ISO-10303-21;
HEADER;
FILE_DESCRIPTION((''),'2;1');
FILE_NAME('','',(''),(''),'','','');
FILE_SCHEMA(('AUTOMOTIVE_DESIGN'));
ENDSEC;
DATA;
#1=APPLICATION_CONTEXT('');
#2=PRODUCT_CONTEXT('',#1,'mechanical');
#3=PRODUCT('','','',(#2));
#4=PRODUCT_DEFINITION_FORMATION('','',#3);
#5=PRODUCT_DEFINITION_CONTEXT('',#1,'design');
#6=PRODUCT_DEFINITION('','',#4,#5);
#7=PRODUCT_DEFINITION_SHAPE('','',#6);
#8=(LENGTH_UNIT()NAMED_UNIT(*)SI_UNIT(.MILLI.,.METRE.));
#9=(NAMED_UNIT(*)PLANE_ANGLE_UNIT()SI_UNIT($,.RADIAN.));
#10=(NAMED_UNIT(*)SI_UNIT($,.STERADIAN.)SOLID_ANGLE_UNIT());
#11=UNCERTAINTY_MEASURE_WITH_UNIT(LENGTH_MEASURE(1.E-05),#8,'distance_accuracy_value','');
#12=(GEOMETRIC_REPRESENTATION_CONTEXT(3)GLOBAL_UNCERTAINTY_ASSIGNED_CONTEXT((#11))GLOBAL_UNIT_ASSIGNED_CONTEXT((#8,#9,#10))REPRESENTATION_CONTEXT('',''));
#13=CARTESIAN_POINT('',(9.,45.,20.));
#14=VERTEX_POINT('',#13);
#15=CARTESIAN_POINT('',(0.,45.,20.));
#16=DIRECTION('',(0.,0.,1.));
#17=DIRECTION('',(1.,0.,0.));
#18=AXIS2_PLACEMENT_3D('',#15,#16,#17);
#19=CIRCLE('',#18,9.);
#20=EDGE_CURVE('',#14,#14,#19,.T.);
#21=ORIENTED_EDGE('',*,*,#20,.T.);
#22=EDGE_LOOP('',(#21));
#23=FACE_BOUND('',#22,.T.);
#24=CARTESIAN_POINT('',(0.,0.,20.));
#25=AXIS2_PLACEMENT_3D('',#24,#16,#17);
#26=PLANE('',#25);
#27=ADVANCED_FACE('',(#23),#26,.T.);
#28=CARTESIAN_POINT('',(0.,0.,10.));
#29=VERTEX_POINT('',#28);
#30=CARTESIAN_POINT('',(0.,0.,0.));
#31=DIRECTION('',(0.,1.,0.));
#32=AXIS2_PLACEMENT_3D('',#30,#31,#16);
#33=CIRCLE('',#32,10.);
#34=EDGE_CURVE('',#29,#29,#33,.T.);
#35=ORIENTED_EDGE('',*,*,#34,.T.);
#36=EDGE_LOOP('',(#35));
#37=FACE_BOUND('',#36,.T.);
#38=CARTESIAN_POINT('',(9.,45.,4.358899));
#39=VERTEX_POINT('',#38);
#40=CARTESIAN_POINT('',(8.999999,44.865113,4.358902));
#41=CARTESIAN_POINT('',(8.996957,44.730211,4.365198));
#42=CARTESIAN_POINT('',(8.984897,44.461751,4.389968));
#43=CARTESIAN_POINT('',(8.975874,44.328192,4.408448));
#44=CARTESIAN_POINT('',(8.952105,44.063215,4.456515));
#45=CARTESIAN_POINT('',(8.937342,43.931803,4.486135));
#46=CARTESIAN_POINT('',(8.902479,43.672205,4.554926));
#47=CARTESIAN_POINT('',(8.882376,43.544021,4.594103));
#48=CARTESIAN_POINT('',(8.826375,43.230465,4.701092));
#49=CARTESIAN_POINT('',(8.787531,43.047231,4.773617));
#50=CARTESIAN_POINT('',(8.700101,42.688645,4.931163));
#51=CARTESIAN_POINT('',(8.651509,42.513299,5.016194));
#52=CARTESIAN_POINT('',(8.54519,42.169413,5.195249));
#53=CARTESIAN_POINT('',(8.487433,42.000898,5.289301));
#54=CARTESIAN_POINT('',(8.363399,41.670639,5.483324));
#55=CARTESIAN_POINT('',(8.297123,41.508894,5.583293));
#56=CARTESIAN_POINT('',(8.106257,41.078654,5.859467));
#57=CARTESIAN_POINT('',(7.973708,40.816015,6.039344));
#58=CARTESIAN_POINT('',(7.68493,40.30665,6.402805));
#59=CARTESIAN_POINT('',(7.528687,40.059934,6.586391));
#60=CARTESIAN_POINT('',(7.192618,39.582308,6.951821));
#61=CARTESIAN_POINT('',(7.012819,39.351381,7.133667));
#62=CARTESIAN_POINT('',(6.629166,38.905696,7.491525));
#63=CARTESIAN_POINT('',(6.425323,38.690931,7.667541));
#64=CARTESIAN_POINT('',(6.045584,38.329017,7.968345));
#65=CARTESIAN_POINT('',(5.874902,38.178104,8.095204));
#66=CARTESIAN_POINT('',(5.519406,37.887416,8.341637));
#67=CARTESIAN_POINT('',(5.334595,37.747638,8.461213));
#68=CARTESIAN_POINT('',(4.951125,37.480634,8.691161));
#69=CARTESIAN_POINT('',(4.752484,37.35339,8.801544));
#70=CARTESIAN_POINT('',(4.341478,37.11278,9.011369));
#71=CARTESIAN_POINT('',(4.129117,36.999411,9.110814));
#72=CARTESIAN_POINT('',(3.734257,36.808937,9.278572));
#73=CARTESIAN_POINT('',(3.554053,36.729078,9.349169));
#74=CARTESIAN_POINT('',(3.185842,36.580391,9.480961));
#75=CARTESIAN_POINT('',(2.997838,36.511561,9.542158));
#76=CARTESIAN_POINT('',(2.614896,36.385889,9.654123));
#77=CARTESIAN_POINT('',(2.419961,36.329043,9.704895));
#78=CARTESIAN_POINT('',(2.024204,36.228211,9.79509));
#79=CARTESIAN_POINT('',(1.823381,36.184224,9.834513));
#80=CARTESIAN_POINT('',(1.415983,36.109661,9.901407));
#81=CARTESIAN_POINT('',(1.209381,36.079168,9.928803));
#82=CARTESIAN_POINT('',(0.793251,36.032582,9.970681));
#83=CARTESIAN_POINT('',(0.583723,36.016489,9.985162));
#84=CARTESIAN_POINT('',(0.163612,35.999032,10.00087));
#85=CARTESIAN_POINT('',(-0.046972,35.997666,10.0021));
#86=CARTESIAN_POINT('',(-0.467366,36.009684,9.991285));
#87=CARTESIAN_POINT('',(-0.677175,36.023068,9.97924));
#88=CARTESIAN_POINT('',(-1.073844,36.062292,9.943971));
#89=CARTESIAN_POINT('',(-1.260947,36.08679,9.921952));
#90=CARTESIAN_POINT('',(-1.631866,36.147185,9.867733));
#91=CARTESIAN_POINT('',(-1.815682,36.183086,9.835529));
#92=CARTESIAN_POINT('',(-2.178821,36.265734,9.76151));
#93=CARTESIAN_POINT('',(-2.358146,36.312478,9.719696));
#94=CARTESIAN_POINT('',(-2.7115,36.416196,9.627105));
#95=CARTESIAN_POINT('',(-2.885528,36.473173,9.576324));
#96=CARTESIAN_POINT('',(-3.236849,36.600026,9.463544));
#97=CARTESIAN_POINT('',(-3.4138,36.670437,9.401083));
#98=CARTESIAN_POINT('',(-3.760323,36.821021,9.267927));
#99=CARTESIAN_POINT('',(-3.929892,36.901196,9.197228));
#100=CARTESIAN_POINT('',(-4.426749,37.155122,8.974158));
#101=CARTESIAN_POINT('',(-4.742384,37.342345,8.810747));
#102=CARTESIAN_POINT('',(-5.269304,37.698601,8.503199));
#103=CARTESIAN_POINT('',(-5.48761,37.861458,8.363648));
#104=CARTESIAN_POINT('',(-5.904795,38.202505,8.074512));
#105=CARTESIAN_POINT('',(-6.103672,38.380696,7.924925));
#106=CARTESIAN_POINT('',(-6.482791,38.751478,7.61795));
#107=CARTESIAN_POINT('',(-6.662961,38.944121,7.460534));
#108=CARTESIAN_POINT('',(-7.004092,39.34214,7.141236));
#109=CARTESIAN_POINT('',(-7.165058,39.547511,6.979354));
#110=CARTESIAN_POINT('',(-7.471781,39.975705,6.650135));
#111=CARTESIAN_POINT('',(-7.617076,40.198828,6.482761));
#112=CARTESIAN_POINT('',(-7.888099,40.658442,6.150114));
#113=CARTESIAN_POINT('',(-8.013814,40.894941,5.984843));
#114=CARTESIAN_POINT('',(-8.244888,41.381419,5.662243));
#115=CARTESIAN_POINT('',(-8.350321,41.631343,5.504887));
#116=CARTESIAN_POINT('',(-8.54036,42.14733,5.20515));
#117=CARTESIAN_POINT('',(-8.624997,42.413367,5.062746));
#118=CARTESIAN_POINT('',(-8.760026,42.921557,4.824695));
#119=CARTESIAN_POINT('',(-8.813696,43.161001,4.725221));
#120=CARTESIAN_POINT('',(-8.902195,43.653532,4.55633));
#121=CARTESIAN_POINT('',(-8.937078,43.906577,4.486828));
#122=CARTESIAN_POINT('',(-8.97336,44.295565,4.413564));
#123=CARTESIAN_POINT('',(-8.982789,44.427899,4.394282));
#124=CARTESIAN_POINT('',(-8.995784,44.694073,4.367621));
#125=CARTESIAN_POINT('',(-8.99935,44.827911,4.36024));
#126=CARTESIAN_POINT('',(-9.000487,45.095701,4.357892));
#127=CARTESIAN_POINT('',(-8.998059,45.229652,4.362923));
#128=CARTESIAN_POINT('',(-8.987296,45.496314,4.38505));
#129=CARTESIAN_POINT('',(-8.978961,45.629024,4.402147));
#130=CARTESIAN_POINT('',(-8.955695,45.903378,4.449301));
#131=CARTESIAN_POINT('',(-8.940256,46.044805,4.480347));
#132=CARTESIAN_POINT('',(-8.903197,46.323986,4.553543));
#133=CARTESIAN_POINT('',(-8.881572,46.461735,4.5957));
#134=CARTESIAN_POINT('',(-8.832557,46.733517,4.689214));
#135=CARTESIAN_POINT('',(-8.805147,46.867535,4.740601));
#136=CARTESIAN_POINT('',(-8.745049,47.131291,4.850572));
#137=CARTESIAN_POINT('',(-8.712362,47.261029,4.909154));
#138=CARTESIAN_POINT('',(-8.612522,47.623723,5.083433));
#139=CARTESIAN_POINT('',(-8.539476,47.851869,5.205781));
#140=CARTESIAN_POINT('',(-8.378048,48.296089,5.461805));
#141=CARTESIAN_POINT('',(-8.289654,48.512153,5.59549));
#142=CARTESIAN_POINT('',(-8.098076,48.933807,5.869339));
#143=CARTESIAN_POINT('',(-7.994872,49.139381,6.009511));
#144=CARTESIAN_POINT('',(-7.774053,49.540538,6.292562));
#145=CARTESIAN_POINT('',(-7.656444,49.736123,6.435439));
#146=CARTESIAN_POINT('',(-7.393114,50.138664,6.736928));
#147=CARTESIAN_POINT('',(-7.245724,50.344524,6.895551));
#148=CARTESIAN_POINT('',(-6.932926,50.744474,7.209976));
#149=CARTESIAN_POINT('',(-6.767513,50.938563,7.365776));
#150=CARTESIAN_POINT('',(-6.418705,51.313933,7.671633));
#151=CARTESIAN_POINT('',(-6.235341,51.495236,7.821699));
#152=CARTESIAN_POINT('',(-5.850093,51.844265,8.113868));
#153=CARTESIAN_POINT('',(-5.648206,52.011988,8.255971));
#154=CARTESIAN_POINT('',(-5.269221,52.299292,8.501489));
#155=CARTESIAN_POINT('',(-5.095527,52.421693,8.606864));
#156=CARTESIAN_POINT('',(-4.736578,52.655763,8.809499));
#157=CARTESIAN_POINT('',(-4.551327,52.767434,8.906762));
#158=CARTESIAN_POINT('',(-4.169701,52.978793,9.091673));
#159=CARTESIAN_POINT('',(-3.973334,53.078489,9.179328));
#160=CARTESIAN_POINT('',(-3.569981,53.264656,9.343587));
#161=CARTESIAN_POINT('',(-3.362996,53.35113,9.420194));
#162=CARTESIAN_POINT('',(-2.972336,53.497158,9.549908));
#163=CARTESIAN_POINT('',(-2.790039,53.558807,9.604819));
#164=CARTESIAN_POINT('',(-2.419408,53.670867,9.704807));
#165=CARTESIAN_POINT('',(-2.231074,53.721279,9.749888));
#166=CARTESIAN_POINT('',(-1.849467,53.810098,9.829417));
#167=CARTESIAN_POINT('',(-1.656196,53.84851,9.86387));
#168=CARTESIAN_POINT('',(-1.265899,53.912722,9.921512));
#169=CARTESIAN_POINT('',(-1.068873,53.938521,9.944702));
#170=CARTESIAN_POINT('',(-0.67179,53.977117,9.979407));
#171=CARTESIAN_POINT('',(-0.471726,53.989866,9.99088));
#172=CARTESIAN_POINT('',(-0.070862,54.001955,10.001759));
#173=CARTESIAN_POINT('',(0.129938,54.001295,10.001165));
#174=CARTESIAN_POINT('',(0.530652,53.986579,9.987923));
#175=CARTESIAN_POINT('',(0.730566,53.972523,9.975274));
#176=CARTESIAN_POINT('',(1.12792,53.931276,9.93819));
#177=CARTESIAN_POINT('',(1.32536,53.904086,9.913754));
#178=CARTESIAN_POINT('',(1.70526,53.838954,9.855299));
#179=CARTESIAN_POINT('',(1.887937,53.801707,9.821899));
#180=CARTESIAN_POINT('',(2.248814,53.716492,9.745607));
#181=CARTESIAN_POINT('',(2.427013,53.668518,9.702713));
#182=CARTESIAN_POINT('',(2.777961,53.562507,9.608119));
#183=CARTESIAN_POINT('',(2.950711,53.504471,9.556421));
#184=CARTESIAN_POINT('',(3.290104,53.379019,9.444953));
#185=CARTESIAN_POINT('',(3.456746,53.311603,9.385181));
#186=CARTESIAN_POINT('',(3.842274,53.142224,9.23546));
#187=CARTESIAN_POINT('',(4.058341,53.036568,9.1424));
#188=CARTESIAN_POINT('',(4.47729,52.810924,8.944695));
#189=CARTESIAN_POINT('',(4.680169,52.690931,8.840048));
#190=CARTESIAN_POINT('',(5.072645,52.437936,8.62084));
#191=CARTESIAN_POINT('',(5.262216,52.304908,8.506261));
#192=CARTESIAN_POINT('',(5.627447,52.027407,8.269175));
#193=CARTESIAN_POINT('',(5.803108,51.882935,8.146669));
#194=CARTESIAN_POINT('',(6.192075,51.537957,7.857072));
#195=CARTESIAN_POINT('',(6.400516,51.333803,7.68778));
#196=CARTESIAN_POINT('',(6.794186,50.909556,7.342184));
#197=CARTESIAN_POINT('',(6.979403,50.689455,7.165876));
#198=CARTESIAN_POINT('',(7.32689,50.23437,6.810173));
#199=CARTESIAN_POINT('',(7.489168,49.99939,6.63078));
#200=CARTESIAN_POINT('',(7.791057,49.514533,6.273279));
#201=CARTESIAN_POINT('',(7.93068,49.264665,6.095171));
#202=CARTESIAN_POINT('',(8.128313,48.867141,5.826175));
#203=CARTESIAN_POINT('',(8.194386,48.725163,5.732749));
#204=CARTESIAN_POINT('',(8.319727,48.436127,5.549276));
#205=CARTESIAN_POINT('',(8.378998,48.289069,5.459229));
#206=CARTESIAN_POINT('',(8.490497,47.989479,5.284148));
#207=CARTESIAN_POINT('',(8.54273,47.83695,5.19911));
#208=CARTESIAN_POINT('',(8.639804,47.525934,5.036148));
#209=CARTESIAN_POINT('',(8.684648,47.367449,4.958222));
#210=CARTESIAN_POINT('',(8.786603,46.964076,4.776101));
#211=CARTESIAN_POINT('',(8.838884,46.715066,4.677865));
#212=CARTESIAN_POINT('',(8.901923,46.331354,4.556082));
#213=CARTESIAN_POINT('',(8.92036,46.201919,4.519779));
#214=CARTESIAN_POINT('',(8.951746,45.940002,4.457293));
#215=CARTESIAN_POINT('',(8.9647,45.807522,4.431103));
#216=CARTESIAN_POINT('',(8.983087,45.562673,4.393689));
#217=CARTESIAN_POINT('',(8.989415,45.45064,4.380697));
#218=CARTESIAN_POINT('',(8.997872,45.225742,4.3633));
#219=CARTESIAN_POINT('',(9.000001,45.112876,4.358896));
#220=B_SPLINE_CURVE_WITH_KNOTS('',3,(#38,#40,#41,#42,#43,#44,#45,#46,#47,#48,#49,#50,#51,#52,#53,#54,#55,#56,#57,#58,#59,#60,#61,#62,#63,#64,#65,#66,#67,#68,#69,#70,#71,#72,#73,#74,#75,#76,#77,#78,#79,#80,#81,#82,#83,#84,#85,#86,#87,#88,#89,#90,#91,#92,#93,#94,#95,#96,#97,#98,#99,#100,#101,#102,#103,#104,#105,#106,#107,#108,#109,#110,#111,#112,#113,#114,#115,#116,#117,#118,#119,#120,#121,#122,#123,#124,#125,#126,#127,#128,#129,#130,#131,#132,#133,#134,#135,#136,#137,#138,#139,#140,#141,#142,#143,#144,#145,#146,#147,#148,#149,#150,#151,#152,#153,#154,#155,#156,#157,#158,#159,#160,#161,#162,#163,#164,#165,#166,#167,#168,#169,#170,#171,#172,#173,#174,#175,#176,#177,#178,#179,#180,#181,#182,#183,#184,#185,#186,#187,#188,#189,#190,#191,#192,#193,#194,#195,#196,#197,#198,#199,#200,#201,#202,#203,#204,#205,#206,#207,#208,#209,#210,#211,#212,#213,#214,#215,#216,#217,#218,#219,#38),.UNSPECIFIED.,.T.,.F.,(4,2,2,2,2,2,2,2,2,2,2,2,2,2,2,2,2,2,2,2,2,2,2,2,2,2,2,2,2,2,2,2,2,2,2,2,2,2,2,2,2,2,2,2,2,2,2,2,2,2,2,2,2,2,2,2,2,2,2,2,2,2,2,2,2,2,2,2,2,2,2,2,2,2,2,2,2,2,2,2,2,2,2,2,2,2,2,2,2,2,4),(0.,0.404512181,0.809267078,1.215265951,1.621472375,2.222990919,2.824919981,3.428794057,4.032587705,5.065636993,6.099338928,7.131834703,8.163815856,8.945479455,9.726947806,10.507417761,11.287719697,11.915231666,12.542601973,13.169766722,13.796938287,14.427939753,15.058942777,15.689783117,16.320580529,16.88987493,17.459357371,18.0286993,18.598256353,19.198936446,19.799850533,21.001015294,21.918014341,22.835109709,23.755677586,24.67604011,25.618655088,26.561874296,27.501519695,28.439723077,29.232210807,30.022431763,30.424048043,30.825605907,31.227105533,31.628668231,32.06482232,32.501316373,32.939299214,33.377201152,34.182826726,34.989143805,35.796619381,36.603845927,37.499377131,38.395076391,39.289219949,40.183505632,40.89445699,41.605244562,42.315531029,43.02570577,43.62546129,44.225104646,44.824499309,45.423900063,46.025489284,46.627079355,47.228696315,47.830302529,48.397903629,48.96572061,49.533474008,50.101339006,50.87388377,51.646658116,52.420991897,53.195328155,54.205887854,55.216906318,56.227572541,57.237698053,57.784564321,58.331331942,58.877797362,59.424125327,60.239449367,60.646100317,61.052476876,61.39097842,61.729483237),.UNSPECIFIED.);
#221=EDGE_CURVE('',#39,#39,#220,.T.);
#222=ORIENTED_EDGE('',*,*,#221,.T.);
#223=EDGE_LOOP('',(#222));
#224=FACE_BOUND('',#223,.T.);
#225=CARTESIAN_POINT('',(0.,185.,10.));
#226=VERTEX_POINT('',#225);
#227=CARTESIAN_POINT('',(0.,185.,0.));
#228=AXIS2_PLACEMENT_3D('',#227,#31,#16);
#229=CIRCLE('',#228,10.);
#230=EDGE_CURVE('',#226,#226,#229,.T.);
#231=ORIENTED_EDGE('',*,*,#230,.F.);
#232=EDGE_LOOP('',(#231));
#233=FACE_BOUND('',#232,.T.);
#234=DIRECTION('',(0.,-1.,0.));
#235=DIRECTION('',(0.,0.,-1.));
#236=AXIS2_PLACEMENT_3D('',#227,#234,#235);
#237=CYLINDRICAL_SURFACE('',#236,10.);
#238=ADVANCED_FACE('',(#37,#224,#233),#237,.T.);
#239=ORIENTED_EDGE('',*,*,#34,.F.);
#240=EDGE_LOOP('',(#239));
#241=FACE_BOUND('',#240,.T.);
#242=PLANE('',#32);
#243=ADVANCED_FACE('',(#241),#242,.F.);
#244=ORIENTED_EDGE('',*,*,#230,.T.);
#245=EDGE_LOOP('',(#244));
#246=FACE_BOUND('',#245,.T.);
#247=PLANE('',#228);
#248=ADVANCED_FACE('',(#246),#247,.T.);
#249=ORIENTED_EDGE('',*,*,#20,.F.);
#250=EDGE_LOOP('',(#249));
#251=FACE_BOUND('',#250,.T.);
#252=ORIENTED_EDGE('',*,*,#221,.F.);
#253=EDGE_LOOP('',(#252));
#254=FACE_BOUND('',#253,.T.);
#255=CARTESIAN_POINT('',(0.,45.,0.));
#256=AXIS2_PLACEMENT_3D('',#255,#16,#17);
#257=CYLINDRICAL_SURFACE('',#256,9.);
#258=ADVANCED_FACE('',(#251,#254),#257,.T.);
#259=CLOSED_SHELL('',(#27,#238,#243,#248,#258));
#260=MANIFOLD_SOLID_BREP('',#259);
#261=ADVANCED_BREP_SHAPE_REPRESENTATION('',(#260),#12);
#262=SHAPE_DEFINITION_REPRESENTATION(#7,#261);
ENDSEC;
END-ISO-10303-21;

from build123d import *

# Parameters (mm, degrees)
SZKIC1_R                        = 10
DODANIE_WYCI_GNI_CIE1_DEPTH     = 185
DODANIE_WYCI_GNI_CIE2_START     = 4.358898842
DODANIE_WYCI_GNI_CIE2_OUTLINE_R = 9
DODANIE_WYCI_GNI_CIE2_DEPTH     = 15.641101158


# Read off the part's stored shape, not the designer's step: Dodanie-wyciągnięcie2
with BuildPart() as part:
    # Szkic1 → Dodanie-wyciągnięcie1 (new body)
    with BuildSketch(Plane(origin=(0, 0, 0), x_dir=(1, 0, 0), z_dir=(0, 1, 0))):
        with Locations(Location((0, 0, 0), (0, 0, 270))):
            Circle(SZKIC1_R)
    extrude(amount=DODANIE_WYCI_GNI_CIE1_DEPTH)

    # Dodanie-wyciągnięcie2 outline → Dodanie-wyciągnięcie2 (add)
    with BuildSketch(Plane.XY.offset(DODANIE_WYCI_GNI_CIE2_START)):
        with Locations((0, 45)):
            Circle(DODANIE_WYCI_GNI_CIE2_OUTLINE_R)
    extrude(amount=DODANIE_WYCI_GNI_CIE2_DEPTH)


solid = part.part
